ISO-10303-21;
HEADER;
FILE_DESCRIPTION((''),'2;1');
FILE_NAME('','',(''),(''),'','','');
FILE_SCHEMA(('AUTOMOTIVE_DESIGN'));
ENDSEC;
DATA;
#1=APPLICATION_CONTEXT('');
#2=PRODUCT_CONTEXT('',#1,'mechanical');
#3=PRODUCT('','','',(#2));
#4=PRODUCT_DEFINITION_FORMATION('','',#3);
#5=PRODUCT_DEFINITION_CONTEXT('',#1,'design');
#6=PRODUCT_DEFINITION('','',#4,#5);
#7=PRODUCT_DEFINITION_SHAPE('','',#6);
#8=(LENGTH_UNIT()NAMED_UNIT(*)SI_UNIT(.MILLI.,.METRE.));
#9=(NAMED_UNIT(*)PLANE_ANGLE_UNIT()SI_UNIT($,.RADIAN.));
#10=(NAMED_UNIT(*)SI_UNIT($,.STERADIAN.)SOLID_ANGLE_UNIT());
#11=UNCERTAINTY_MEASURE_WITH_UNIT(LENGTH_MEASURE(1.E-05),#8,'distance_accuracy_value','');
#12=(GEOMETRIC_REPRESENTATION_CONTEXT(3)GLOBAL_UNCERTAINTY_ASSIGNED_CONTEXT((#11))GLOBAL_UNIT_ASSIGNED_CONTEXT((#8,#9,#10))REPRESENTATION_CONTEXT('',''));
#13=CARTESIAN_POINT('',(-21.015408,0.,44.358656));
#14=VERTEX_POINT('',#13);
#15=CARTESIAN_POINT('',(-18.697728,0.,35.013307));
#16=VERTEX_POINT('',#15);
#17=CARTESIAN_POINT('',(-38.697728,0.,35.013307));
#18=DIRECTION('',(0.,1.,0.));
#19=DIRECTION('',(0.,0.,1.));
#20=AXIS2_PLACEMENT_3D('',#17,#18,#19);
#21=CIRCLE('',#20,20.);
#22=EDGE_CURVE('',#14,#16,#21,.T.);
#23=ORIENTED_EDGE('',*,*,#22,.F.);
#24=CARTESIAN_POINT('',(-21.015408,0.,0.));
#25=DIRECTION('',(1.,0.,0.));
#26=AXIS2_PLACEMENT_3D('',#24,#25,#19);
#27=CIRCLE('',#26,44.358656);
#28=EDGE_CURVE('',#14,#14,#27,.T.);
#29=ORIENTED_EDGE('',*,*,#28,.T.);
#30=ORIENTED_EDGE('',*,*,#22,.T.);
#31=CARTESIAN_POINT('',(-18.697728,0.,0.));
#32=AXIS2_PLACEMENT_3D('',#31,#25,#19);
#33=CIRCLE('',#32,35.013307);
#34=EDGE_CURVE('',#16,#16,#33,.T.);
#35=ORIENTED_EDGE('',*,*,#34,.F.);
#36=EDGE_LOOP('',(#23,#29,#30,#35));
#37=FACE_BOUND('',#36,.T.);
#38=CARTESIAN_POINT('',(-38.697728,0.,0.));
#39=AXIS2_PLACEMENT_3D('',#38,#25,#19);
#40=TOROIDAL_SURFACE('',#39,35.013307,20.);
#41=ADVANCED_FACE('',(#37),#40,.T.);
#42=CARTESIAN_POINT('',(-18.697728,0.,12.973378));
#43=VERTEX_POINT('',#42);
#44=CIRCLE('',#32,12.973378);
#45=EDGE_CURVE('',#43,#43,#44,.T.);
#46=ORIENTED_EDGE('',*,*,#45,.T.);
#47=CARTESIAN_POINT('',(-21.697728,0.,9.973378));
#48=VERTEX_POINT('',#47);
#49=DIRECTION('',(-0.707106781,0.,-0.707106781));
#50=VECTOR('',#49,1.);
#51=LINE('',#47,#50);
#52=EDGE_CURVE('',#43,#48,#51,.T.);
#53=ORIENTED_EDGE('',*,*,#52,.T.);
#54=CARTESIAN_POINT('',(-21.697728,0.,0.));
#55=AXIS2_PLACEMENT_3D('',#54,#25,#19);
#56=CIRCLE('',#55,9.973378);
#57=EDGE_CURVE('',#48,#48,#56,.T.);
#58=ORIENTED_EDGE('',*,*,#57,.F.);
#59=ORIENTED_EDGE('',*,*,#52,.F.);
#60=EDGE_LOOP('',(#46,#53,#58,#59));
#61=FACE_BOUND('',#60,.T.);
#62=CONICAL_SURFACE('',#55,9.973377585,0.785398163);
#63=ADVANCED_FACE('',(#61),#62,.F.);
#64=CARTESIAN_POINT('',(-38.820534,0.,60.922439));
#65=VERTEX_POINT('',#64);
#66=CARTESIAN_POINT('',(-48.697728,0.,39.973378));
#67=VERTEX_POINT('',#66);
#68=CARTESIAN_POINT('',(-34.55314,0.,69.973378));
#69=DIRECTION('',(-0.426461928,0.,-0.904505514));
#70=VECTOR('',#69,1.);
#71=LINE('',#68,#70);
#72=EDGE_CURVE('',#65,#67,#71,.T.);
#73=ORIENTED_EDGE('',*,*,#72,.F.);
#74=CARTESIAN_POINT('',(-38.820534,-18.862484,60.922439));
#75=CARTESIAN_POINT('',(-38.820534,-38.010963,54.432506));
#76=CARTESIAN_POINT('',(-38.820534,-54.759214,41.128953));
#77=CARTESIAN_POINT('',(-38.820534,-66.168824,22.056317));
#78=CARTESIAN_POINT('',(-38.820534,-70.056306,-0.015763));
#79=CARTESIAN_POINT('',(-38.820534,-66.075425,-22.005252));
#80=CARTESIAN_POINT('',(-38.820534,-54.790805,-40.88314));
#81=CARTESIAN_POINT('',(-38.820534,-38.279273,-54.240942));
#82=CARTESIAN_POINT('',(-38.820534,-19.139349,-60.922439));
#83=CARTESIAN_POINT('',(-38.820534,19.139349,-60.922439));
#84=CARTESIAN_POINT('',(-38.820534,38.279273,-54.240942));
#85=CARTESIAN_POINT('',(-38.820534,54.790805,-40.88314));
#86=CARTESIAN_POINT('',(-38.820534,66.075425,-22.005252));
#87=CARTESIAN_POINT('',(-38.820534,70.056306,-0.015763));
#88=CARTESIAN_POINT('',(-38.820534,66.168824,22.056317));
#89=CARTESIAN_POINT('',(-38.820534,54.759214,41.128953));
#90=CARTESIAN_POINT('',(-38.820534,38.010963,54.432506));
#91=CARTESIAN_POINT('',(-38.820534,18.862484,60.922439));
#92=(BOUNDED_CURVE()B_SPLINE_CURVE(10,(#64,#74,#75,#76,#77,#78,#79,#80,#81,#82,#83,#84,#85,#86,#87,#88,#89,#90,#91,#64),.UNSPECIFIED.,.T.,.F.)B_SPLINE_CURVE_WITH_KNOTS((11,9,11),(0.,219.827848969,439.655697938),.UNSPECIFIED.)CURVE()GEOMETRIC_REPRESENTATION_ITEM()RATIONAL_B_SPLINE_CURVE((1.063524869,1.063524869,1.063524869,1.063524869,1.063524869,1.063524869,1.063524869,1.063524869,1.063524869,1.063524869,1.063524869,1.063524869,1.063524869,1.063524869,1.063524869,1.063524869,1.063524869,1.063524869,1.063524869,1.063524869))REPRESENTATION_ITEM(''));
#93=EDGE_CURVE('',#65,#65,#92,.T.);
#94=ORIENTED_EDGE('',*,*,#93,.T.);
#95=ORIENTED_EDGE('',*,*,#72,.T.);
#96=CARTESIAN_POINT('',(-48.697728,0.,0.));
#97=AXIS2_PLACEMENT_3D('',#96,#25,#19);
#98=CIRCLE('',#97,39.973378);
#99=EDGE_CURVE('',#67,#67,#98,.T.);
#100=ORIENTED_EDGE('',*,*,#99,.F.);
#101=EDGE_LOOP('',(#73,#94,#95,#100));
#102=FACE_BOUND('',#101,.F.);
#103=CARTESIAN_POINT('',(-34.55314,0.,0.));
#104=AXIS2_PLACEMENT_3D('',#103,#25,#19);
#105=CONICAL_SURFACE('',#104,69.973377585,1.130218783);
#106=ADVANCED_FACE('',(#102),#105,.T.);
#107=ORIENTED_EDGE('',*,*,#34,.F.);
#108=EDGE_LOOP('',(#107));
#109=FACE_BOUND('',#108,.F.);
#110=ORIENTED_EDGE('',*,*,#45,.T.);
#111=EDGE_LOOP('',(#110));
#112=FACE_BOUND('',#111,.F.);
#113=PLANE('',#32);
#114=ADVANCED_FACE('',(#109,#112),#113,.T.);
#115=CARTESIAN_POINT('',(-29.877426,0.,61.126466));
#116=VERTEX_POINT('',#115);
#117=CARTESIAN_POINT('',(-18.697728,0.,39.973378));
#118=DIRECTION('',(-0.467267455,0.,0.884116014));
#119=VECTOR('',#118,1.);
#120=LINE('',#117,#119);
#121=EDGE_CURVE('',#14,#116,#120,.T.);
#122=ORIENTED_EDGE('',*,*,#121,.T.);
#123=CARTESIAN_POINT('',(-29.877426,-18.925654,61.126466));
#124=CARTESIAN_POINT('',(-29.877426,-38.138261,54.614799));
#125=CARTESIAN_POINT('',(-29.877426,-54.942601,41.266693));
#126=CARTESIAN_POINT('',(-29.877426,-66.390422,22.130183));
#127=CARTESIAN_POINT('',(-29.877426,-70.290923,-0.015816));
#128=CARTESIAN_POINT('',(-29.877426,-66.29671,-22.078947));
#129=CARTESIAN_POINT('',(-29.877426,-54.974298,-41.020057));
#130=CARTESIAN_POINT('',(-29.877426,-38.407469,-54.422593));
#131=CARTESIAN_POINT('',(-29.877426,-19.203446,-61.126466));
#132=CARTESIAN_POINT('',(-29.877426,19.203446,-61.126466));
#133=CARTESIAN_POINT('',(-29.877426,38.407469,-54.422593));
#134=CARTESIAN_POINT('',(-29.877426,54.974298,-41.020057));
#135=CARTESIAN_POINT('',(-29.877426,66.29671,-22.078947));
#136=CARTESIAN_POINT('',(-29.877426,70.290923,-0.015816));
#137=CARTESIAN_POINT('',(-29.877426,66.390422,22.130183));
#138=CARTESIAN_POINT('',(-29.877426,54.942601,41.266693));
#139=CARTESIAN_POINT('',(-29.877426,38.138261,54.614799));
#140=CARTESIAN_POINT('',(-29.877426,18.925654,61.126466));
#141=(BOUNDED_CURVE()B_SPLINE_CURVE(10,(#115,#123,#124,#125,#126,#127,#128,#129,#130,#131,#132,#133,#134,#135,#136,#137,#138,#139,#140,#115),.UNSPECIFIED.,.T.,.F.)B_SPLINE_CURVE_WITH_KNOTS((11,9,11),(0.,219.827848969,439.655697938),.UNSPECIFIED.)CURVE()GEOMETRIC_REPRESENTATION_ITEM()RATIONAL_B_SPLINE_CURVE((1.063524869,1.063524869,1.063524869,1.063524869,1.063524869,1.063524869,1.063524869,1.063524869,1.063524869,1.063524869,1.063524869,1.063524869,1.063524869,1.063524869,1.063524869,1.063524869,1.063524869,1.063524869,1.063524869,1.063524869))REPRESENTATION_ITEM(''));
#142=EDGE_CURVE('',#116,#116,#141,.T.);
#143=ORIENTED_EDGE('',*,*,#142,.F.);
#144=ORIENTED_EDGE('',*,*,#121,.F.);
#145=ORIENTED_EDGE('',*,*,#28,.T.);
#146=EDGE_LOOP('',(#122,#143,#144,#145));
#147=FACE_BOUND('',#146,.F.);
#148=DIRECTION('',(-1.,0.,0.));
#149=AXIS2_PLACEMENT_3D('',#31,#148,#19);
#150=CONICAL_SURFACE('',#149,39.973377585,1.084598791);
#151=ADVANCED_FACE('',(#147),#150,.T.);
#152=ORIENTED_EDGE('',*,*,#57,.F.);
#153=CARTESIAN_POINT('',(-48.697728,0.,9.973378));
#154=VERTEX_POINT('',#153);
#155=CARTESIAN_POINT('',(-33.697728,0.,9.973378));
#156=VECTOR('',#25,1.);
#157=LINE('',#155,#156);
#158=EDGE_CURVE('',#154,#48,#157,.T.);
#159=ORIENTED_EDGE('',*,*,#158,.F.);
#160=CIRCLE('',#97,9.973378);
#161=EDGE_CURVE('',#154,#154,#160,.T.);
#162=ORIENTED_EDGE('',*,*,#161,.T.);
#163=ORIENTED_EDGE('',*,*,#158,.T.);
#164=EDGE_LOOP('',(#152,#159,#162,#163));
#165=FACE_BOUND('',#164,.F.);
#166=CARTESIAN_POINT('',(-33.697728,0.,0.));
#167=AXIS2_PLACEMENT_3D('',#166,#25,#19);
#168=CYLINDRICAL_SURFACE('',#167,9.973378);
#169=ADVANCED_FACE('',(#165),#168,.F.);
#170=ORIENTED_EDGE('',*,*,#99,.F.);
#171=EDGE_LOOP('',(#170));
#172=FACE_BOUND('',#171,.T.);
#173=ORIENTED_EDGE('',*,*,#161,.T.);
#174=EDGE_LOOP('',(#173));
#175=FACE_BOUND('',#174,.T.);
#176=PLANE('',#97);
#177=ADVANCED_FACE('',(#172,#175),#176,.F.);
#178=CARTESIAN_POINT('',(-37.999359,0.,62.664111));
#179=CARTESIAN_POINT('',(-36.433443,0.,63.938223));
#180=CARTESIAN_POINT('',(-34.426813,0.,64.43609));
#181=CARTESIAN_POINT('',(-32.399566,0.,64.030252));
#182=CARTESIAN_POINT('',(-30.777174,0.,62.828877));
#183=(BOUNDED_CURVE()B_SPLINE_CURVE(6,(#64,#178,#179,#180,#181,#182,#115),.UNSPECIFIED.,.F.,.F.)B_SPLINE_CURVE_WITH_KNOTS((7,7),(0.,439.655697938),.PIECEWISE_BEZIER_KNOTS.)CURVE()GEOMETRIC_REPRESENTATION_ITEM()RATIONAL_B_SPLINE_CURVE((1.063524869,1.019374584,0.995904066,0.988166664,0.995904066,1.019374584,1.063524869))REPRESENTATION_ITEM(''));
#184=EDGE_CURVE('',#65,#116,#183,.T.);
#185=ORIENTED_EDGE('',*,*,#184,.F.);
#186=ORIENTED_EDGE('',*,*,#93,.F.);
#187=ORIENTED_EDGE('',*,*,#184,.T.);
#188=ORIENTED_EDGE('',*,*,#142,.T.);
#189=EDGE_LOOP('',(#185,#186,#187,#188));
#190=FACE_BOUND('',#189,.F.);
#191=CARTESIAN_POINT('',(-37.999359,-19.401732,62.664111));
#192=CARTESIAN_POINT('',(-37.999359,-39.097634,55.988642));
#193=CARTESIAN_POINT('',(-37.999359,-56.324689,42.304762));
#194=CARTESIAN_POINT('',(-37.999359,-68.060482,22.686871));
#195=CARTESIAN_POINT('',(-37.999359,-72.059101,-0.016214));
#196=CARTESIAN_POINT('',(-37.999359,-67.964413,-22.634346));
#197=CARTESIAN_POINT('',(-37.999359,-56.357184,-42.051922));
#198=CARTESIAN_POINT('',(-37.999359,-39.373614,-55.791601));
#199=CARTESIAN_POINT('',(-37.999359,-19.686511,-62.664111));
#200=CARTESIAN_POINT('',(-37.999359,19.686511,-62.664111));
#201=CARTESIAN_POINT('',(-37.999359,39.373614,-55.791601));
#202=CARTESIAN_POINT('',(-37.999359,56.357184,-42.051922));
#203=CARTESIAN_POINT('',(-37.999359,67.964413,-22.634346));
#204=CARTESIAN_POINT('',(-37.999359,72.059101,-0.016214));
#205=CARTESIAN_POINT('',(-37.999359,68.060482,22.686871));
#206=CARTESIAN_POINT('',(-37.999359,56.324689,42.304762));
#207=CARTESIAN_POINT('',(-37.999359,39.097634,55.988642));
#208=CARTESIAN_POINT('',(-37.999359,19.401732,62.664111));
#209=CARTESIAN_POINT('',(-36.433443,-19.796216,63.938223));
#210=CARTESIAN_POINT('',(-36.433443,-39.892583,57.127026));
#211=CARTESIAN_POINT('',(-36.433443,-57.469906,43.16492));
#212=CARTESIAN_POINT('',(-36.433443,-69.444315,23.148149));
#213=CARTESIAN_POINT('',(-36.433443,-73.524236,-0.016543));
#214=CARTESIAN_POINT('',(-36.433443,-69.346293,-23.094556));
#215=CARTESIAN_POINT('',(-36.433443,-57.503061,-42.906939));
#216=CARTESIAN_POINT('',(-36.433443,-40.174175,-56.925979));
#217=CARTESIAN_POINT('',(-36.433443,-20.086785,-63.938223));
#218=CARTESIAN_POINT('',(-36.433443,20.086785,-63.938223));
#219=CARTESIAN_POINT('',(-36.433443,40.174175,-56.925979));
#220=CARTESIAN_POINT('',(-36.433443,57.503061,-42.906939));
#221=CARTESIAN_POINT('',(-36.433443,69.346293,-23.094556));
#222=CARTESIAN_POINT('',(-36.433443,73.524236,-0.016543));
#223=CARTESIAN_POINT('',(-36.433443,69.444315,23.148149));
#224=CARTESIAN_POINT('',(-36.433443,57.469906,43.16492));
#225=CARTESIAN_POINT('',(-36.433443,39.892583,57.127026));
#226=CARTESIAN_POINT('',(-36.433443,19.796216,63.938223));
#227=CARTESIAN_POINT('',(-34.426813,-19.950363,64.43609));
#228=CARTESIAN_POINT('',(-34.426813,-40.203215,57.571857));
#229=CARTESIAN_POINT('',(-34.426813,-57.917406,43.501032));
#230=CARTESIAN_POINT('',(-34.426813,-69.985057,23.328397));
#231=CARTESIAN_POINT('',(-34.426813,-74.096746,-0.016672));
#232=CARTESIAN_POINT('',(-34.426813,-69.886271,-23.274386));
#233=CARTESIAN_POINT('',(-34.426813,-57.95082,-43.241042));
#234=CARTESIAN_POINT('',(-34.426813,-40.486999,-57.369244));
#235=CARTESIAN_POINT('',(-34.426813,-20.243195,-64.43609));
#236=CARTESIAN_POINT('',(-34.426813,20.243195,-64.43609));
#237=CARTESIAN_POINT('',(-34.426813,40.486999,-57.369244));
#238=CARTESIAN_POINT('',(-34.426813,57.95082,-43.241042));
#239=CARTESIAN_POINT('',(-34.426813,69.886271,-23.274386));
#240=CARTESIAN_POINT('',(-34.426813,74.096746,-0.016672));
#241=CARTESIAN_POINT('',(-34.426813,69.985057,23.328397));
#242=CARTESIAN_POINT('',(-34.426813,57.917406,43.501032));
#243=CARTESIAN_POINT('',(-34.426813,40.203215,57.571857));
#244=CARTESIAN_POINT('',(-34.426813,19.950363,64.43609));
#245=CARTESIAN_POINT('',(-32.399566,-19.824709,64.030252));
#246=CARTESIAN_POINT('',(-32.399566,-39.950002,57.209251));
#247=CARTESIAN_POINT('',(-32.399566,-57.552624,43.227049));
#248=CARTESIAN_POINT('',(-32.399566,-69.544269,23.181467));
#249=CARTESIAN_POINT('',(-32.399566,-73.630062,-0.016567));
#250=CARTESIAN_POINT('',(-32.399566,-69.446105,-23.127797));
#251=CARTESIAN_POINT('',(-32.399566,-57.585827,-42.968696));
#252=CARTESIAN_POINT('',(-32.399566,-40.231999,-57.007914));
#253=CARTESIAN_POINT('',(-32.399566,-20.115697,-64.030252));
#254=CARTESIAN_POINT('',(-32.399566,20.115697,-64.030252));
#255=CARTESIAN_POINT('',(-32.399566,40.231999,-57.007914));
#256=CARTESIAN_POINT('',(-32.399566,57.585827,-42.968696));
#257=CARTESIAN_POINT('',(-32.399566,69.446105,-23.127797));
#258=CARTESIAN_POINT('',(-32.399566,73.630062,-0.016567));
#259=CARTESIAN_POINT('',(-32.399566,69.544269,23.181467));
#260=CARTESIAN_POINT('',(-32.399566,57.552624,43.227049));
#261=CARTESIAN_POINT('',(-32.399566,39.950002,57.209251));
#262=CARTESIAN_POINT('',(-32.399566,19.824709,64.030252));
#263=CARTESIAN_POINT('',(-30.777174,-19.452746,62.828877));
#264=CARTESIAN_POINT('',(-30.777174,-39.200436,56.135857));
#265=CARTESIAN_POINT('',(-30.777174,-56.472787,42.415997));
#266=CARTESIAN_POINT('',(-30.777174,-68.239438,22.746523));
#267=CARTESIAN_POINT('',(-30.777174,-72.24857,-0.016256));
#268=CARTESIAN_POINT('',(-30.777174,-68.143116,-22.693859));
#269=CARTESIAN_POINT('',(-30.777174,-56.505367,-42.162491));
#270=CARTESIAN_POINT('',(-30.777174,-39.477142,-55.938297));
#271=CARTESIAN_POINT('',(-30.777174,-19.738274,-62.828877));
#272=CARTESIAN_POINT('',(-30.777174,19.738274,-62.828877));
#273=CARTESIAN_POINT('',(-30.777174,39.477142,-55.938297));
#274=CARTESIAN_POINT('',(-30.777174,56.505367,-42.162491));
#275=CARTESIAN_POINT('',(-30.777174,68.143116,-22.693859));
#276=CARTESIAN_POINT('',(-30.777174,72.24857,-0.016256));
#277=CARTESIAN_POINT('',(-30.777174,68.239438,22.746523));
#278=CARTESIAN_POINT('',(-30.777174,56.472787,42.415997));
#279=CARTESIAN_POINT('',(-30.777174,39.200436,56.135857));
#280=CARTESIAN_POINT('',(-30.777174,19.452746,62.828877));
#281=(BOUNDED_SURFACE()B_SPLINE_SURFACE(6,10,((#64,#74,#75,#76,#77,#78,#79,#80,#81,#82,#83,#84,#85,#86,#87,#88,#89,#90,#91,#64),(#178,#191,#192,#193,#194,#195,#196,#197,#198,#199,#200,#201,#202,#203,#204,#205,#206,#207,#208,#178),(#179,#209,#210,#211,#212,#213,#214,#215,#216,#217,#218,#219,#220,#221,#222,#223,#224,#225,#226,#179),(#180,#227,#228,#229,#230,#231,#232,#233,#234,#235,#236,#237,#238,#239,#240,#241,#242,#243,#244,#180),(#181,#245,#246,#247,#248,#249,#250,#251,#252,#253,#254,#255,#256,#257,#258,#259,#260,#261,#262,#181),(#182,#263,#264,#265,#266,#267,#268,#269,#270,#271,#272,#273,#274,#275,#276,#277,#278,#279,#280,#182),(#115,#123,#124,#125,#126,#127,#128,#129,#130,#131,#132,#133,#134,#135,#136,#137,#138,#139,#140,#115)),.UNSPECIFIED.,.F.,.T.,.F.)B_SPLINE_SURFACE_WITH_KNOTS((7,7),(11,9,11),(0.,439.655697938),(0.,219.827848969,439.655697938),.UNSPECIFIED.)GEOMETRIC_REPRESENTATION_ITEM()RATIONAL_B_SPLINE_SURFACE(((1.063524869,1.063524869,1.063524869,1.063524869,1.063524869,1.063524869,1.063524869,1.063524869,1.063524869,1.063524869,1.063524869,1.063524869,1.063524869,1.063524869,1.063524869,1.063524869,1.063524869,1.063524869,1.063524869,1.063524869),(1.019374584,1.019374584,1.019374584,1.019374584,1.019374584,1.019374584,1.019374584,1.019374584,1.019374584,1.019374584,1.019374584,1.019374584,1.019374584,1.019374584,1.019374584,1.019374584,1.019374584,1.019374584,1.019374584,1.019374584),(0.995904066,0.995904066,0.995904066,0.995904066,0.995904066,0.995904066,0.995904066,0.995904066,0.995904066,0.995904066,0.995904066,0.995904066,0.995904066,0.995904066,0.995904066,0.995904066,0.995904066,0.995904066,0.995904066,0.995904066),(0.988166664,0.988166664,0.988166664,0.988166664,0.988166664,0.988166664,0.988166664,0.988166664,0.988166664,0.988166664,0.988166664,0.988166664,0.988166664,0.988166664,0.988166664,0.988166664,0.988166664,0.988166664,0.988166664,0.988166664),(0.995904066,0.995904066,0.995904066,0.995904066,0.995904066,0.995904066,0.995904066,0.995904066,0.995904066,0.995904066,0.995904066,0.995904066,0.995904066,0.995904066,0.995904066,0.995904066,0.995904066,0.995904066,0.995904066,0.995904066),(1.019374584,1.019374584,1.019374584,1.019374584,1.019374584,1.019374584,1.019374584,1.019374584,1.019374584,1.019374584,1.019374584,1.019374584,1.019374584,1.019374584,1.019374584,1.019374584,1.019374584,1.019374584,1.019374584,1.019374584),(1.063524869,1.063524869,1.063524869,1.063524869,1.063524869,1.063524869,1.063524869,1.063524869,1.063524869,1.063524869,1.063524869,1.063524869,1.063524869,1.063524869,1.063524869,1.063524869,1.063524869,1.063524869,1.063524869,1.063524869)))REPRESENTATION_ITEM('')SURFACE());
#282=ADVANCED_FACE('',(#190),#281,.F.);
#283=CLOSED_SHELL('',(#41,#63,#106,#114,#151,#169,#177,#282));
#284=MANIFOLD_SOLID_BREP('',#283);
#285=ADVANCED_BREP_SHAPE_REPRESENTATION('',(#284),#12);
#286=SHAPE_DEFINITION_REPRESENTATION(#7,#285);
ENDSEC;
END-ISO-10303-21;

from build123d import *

# Parameters (mm, degrees)
F0_W    = 30
F0_H    = 30
F7_R    = 5
F1_R    = 20
F2_SIZE = 3


# Not quite as in the source:
# - the program builds the solid bodies; features that only make, move or delete a surface that nothing else refers to are left out


with BuildPart() as f6:
    # F0 (on Front) → F6 (revolve)
    with BuildSketch(Plane.XZ):
        Polygon((-34.5531404018, 69.9733775854), (-48.6977283961, 39.9733775854), (-18.6977283961, 39.9733775854), align=None)
        with Locations((-33.6977283961, 24.9733775854)):
            Rectangle(F0_W, F0_H)
    revolve(axis=Axis((8.8008791208, 0, 0), (1, 0, 0)))

    # F7
    f7_edges = [f6.edges().sort_by_distance(p)[0] for p in [
        (-34.55314, 0, -69.973378),
    ]]
    fillet(f7_edges, radius=F7_R)

    # F1
    f1_edges = [f6.edges().sort_by_distance(p)[0] for p in [
        (-18.697728, 0, -39.973378),
    ]]
    fillet(f1_edges, radius=F1_R)

    # F2
    f2_edges = [f6.edges().sort_by_distance(p)[0] for p in [
        (-18.697728, 0, -9.973378),
    ]]
    chamfer(f2_edges, length=F2_SIZE)


solid = f6.part
